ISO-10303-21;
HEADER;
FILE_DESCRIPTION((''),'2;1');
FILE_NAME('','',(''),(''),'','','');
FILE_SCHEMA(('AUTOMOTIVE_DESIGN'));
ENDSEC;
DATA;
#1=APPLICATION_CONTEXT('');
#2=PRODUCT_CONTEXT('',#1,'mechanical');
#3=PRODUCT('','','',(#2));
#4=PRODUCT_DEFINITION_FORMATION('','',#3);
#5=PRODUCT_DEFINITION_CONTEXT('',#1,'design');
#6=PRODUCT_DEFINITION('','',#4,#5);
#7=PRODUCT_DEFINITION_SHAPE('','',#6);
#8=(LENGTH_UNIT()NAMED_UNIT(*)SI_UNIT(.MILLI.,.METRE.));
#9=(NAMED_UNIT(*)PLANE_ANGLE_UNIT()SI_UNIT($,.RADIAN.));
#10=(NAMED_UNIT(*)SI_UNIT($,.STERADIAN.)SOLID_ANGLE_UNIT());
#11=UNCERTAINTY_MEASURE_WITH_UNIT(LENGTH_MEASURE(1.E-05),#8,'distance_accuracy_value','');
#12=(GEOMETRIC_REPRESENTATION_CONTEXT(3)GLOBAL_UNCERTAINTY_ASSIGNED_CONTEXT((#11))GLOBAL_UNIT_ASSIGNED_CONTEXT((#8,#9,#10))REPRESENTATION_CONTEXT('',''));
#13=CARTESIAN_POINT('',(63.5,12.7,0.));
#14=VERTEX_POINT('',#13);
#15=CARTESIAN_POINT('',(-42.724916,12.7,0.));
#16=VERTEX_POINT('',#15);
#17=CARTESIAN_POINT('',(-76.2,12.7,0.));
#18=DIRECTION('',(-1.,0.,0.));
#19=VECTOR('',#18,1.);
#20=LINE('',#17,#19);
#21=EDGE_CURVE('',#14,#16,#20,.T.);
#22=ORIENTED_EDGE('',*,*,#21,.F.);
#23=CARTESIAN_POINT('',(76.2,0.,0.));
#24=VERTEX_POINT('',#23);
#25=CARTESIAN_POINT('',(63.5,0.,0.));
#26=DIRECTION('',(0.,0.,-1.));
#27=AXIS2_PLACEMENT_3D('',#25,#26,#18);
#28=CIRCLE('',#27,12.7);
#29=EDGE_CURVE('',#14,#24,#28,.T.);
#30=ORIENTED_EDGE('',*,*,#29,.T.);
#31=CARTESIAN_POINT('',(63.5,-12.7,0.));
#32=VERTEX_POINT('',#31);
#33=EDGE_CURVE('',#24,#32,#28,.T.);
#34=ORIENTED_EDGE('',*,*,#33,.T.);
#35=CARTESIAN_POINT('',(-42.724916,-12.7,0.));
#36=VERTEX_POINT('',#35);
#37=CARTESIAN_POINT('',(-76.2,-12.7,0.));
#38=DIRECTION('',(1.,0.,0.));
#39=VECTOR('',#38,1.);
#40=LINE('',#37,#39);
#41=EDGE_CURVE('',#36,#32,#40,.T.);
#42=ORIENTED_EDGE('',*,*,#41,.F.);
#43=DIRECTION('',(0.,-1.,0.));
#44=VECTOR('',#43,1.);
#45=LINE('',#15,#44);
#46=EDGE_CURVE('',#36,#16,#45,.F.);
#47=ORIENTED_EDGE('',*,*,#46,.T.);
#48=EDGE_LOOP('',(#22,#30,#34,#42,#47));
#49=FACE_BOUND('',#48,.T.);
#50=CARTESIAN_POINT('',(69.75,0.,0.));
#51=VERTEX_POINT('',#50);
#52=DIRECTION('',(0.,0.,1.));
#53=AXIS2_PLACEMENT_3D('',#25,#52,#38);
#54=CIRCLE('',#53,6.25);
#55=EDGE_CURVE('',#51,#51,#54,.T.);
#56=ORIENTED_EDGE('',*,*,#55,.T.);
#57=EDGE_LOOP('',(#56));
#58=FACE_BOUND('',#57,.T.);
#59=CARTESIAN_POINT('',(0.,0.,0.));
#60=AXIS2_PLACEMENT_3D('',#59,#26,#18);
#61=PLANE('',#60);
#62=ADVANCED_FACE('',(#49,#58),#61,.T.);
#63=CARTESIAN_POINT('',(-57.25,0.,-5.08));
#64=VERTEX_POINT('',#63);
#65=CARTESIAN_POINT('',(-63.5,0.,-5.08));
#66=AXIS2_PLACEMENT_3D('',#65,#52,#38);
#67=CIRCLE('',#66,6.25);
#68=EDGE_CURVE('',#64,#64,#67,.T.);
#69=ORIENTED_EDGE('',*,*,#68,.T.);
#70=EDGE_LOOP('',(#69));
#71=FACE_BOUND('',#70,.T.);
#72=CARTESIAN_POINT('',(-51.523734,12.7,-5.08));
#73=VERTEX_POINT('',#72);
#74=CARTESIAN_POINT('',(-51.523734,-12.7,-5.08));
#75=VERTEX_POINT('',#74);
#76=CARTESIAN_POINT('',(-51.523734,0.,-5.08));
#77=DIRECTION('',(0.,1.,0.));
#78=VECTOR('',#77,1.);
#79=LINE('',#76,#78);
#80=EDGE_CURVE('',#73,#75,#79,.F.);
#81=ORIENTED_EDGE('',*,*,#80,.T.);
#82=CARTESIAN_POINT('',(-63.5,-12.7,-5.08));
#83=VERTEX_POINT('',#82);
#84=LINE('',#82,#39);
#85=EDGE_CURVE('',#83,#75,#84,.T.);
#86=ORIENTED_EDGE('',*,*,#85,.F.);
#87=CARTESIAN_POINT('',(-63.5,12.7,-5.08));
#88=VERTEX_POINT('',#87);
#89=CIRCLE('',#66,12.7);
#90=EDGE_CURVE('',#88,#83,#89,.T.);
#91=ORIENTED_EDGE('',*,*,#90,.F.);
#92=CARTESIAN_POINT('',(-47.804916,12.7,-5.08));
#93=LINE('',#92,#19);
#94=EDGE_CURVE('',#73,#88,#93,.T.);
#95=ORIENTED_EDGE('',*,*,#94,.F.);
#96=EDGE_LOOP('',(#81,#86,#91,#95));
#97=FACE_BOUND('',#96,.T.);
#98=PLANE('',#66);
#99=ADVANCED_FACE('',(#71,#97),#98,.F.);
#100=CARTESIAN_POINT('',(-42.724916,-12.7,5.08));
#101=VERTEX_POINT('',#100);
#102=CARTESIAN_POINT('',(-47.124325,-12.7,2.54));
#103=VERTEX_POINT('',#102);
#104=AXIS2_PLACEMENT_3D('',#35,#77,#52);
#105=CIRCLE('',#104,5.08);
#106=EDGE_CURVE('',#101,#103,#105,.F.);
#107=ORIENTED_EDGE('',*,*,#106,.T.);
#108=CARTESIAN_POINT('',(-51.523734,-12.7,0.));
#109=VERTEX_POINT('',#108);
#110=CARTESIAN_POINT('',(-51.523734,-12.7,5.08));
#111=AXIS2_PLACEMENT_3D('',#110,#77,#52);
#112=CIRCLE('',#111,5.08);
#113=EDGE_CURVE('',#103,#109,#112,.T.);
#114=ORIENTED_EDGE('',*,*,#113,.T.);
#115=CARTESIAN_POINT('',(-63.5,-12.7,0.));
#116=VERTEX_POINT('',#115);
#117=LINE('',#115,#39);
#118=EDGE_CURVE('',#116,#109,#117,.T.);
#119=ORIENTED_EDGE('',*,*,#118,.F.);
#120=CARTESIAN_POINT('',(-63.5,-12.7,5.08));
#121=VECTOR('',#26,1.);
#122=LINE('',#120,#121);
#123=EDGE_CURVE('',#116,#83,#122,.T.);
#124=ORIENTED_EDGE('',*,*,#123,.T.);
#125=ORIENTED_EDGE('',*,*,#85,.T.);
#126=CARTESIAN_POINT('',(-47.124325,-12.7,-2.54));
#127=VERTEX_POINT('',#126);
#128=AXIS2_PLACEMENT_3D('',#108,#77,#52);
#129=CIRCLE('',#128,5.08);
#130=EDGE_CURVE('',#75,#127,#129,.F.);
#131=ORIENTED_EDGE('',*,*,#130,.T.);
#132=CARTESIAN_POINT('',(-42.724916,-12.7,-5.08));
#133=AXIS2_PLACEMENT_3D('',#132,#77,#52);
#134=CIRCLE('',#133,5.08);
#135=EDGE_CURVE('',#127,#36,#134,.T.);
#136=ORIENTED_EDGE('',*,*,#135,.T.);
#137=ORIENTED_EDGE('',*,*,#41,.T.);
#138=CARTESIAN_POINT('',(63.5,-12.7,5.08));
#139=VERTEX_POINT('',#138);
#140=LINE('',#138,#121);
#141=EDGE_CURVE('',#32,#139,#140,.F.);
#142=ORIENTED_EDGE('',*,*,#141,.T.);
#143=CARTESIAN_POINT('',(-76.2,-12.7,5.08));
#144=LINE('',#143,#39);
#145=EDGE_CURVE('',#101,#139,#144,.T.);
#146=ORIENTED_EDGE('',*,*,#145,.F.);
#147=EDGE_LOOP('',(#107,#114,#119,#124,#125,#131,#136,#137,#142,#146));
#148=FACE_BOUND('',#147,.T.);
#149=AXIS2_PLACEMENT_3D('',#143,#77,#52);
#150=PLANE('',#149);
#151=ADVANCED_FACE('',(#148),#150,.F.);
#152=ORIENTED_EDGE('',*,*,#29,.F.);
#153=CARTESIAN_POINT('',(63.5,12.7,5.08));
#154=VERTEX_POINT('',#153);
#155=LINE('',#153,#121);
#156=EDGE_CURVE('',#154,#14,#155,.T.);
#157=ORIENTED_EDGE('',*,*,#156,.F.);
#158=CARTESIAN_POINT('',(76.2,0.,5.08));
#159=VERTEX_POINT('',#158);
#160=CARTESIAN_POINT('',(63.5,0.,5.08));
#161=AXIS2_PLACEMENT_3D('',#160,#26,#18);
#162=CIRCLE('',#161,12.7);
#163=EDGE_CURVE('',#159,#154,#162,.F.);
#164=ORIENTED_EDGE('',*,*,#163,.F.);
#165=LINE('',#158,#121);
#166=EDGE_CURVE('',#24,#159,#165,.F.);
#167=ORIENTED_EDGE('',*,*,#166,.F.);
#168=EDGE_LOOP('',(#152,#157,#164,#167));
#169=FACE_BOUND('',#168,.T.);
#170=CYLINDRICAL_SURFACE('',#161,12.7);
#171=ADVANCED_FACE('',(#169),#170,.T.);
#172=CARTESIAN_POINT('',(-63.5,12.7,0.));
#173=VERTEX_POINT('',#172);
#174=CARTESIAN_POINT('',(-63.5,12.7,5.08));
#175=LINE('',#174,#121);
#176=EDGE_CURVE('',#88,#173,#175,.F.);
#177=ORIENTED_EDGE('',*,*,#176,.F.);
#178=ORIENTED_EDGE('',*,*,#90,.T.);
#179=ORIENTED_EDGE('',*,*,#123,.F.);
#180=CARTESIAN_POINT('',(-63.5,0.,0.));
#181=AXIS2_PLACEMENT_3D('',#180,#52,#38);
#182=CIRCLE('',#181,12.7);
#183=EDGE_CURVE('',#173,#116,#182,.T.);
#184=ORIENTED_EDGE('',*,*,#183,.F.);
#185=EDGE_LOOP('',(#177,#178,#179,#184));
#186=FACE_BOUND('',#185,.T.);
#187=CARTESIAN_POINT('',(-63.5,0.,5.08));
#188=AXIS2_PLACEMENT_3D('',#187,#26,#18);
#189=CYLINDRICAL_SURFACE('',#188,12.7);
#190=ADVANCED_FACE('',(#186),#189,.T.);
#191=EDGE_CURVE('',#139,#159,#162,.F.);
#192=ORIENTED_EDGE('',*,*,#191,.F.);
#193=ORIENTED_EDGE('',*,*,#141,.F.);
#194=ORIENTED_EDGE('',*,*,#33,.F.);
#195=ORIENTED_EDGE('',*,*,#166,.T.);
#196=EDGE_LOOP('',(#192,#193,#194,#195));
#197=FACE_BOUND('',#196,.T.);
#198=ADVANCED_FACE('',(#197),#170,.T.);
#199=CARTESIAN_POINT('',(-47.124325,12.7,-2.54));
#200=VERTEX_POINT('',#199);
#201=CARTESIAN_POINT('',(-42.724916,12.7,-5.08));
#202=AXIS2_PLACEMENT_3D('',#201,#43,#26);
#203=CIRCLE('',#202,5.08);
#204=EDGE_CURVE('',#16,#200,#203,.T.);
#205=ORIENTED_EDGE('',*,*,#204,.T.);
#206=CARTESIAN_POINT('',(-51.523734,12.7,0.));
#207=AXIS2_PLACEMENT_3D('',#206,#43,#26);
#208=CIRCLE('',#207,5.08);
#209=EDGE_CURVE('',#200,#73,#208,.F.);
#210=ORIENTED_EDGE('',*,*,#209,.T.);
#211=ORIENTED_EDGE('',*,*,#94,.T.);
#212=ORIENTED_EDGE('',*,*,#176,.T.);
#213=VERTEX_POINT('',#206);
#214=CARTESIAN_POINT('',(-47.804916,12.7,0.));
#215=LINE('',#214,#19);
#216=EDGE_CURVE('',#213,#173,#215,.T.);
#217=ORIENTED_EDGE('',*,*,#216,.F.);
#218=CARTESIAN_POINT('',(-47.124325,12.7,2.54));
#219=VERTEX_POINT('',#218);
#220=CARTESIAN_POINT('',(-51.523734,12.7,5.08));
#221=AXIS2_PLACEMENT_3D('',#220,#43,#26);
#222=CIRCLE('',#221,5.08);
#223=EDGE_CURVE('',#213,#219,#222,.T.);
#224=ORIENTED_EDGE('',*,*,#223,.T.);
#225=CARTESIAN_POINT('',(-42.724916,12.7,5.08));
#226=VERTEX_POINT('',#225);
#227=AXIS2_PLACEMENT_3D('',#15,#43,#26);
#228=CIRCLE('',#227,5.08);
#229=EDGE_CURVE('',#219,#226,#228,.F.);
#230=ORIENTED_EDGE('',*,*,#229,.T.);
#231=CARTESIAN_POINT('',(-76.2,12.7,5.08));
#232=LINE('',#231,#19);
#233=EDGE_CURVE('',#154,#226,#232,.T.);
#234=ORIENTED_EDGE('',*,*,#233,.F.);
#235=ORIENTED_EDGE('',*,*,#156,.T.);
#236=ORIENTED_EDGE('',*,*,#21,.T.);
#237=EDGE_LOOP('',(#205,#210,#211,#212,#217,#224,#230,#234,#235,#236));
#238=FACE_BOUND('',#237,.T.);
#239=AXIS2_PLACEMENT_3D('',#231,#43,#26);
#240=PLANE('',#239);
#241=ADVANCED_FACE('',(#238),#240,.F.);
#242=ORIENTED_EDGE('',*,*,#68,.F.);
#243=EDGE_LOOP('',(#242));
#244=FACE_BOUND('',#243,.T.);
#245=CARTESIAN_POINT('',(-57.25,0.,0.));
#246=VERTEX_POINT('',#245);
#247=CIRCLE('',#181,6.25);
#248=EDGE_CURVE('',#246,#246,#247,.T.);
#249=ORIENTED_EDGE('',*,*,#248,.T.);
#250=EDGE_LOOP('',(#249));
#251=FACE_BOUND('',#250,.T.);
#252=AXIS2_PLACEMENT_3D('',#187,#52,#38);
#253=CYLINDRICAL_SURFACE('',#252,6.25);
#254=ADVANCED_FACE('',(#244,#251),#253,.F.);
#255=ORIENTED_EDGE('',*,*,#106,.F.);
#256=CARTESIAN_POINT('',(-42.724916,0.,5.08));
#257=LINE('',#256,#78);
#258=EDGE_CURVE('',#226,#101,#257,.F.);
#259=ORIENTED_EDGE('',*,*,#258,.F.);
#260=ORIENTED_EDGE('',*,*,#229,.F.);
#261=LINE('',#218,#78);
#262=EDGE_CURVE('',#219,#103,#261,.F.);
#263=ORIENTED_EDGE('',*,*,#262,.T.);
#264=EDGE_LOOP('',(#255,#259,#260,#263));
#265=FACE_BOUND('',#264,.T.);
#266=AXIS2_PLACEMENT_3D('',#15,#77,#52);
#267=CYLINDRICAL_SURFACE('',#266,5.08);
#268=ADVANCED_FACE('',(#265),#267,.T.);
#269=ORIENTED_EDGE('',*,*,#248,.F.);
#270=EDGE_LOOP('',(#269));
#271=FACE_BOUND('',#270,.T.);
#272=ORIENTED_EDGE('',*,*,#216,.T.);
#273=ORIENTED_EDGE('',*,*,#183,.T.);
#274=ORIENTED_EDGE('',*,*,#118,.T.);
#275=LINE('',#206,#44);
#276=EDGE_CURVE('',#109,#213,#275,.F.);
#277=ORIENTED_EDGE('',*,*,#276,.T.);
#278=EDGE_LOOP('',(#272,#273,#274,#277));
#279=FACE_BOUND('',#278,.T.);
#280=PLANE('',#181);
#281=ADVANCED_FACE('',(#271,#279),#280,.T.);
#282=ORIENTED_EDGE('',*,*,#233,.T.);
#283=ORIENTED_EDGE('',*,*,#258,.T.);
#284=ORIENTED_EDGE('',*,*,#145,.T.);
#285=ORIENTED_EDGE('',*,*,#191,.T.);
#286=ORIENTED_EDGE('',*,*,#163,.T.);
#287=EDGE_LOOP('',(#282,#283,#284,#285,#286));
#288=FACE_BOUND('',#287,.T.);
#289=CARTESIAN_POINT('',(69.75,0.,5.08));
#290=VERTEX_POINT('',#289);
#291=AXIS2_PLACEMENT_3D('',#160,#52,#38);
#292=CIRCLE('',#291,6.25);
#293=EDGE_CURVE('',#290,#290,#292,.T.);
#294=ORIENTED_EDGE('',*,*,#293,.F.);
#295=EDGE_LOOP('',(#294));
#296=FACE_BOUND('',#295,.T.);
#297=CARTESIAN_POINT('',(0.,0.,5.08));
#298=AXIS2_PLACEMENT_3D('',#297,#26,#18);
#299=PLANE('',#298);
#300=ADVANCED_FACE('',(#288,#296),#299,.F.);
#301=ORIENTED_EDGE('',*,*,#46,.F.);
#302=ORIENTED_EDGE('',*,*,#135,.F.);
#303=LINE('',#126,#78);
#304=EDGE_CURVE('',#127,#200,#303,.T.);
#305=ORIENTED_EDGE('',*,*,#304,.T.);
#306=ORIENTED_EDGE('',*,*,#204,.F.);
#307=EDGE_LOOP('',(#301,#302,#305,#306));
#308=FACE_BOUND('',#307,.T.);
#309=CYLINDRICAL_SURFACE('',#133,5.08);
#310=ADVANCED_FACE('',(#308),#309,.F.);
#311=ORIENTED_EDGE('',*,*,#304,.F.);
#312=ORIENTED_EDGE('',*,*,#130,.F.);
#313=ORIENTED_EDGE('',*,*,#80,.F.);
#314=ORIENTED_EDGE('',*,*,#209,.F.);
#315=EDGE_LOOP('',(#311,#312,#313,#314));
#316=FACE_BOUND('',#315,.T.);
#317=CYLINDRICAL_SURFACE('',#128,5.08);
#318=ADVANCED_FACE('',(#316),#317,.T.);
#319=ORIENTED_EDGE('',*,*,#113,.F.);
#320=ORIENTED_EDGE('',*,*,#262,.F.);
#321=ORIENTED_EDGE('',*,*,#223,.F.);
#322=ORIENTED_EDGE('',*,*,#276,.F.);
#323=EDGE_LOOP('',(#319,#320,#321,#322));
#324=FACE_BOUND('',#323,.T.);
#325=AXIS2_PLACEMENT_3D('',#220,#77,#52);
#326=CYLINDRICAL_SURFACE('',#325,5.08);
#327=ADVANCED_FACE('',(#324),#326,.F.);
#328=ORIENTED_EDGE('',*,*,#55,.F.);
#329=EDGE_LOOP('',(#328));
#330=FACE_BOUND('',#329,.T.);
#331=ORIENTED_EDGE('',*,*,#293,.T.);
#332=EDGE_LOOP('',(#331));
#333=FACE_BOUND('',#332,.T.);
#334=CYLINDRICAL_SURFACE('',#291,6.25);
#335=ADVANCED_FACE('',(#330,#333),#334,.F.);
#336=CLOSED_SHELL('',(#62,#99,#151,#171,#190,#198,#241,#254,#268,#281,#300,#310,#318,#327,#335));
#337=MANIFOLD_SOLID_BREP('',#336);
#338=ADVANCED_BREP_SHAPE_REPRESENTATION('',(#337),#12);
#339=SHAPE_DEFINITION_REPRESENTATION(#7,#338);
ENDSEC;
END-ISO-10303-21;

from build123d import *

# Parameters (mm, degrees)
SKETCH1_W                    = 152.4
SKETCH1_H                    = 25.4
BOSS_EXTRUDE1_DEPTH          = 5.08
F_12_5_12_5_DIAMETER_HOLE1_D = 12.5
FILLET3_R                    = 12.7
CUT_EXTRUDE1_START           = -76.2
CUT_EXTRUDE1_OUTLINE_W       = 25.4
CUT_EXTRUDE1_OUTLINE_H       = 2.54
CUT_EXTRUDE1_DEPTH           = 28.395084053
BOSS_EXTRUDE2_START          = -7.62
SKETCH10_R                   = 6.25
BOSS_EXTRUDE2_DEPTH          = 7.62
FILLET12_R                   = 5.08
CUT_EXTRUDE2_START           = -2.54
SKETCH12_R                   = 6.25
CUT_EXTRUDE2_DEPTH           = 2.54
FILLET14_R                   = 5.08
FILLET13_R                   = 5.08
FILLET15_R                   = 5.08


# Read off the part's stored shape, not the designer's step: Cut-Extrude1
with BuildPart() as part:
    # Sketch1 → Boss-Extrude1 (new body)
    with BuildSketch(Plane.XY):
        Rectangle(SKETCH1_W, SKETCH1_H)
    extrude(amount=BOSS_EXTRUDE1_DEPTH)

    # Ø12.5 (12.5) Diameter Hole1 (through all)
    with Locations(Plane.XY.offset(5.08)):
        with Locations((-63.5, 0), (63.5, 0)):
            Hole(F_12_5_12_5_DIAMETER_HOLE1_D / 2)

    # Fillet3
    fillet3_edges = [part.edges().sort_by_distance(p)[0] for p in [
        (-76.2, 12.7, 2.54),
        (-76.2, -12.7, 2.54),
        (76.2, -12.7, 2.54),
        (76.2, 12.7, 2.54),
    ]]
    fillet(fillet3_edges, radius=FILLET3_R - 0.0001)  # a hair under: the kernel refuses the full size

    # Cut-Extrude1 outline → Cut-Extrude1 (cut)
    with BuildSketch(Plane.YZ.offset(CUT_EXTRUDE1_START)):
        with Locations((0, 3.81)):
            Rectangle(CUT_EXTRUDE1_OUTLINE_W, CUT_EXTRUDE1_OUTLINE_H)
    extrude(amount=CUT_EXTRUDE1_DEPTH, mode=Mode.SUBTRACT)

    # Sketch10 → Boss-Extrude2 (add)
    with BuildSketch(Plane.XY.offset(2.54).offset(BOSS_EXTRUDE2_START)):
        with BuildLine():
            Line((-47.804915947, 12.7), (-63.5, 12.7))
            ThreePointArc((-63.5, 12.7), (-72.480256121, 8.980256121), (-76.2, 0))
            ThreePointArc((-76.2, 0), (-72.480256121, -8.980256121), (-63.5, -12.7))
            Line((-63.5, -12.7), (-47.804915947, -12.7))
            Line((-47.804915947, -12.7), (-47.804915947, 12.7))
        make_face()
        with Locations((-63.5, 0)):
            Circle(SKETCH10_R, mode=Mode.SUBTRACT)
    extrude(amount=BOSS_EXTRUDE2_DEPTH)

    # Fillet12
    fillet12_edges = [part.edges().sort_by_distance(p)[0] for p in [
        (-47.804915947, 0, 0),
    ]]
    fillet(fillet12_edges, radius=FILLET12_R - 0.0001)  # a hair under: the kernel refuses the full size

    # Sketch12 → Cut-Extrude2 (cut)
    with BuildSketch(Plane.XY.offset(2.54).offset(CUT_EXTRUDE2_START)):
        with BuildLine():
            Line((-63.5, -12.7), (-47.804915947, -12.7))
            Line((-47.804915947, -12.7), (-47.804915947, 12.7))
            Line((-47.804915947, 12.7), (-63.5, 12.7))
            ThreePointArc((-63.5, 12.7), (-76.2, 0), (-63.5, -12.7))
        make_face()
        with Locations((-63.5, 0)):
            Circle(SKETCH12_R, mode=Mode.SUBTRACT)
    extrude(amount=CUT_EXTRUDE2_DEPTH, mode=Mode.SUBTRACT)


with BuildPart() as cut_extrude2_kept_piece:
    # of the separate pieces the step leaves, the one the design keeps (cut_extrude2_pieces_kept)
    add(part.part.solids().sort_by_distance((-42.725015947, -12.7, 0))[0])

    # Fillet14
    fillet14_edges = [cut_extrude2_kept_piece.edges().sort_by_distance(p)[0] for p in [
        (-47.804915947, 0, 5.08),
    ]]
    fillet(fillet14_edges, radius=FILLET14_R - 0.0001)  # a hair under: the kernel refuses the full size

    # Fillet13
    fillet13_edges = [cut_extrude2_kept_piece.edges().sort_by_distance(p)[0] for p in [
        (-47.804915947, 0, -5.08),
    ]]
    fillet(fillet13_edges, radius=FILLET13_R)

    # Fillet15
    fillet15_edges = [cut_extrude2_kept_piece.edges().sort_by_distance(p)[0] for p in [
        (-47.804915947, 0, 0),
    ]]
    fillet(fillet15_edges, radius=FILLET15_R)


solid = cut_extrude2_kept_piece.part
